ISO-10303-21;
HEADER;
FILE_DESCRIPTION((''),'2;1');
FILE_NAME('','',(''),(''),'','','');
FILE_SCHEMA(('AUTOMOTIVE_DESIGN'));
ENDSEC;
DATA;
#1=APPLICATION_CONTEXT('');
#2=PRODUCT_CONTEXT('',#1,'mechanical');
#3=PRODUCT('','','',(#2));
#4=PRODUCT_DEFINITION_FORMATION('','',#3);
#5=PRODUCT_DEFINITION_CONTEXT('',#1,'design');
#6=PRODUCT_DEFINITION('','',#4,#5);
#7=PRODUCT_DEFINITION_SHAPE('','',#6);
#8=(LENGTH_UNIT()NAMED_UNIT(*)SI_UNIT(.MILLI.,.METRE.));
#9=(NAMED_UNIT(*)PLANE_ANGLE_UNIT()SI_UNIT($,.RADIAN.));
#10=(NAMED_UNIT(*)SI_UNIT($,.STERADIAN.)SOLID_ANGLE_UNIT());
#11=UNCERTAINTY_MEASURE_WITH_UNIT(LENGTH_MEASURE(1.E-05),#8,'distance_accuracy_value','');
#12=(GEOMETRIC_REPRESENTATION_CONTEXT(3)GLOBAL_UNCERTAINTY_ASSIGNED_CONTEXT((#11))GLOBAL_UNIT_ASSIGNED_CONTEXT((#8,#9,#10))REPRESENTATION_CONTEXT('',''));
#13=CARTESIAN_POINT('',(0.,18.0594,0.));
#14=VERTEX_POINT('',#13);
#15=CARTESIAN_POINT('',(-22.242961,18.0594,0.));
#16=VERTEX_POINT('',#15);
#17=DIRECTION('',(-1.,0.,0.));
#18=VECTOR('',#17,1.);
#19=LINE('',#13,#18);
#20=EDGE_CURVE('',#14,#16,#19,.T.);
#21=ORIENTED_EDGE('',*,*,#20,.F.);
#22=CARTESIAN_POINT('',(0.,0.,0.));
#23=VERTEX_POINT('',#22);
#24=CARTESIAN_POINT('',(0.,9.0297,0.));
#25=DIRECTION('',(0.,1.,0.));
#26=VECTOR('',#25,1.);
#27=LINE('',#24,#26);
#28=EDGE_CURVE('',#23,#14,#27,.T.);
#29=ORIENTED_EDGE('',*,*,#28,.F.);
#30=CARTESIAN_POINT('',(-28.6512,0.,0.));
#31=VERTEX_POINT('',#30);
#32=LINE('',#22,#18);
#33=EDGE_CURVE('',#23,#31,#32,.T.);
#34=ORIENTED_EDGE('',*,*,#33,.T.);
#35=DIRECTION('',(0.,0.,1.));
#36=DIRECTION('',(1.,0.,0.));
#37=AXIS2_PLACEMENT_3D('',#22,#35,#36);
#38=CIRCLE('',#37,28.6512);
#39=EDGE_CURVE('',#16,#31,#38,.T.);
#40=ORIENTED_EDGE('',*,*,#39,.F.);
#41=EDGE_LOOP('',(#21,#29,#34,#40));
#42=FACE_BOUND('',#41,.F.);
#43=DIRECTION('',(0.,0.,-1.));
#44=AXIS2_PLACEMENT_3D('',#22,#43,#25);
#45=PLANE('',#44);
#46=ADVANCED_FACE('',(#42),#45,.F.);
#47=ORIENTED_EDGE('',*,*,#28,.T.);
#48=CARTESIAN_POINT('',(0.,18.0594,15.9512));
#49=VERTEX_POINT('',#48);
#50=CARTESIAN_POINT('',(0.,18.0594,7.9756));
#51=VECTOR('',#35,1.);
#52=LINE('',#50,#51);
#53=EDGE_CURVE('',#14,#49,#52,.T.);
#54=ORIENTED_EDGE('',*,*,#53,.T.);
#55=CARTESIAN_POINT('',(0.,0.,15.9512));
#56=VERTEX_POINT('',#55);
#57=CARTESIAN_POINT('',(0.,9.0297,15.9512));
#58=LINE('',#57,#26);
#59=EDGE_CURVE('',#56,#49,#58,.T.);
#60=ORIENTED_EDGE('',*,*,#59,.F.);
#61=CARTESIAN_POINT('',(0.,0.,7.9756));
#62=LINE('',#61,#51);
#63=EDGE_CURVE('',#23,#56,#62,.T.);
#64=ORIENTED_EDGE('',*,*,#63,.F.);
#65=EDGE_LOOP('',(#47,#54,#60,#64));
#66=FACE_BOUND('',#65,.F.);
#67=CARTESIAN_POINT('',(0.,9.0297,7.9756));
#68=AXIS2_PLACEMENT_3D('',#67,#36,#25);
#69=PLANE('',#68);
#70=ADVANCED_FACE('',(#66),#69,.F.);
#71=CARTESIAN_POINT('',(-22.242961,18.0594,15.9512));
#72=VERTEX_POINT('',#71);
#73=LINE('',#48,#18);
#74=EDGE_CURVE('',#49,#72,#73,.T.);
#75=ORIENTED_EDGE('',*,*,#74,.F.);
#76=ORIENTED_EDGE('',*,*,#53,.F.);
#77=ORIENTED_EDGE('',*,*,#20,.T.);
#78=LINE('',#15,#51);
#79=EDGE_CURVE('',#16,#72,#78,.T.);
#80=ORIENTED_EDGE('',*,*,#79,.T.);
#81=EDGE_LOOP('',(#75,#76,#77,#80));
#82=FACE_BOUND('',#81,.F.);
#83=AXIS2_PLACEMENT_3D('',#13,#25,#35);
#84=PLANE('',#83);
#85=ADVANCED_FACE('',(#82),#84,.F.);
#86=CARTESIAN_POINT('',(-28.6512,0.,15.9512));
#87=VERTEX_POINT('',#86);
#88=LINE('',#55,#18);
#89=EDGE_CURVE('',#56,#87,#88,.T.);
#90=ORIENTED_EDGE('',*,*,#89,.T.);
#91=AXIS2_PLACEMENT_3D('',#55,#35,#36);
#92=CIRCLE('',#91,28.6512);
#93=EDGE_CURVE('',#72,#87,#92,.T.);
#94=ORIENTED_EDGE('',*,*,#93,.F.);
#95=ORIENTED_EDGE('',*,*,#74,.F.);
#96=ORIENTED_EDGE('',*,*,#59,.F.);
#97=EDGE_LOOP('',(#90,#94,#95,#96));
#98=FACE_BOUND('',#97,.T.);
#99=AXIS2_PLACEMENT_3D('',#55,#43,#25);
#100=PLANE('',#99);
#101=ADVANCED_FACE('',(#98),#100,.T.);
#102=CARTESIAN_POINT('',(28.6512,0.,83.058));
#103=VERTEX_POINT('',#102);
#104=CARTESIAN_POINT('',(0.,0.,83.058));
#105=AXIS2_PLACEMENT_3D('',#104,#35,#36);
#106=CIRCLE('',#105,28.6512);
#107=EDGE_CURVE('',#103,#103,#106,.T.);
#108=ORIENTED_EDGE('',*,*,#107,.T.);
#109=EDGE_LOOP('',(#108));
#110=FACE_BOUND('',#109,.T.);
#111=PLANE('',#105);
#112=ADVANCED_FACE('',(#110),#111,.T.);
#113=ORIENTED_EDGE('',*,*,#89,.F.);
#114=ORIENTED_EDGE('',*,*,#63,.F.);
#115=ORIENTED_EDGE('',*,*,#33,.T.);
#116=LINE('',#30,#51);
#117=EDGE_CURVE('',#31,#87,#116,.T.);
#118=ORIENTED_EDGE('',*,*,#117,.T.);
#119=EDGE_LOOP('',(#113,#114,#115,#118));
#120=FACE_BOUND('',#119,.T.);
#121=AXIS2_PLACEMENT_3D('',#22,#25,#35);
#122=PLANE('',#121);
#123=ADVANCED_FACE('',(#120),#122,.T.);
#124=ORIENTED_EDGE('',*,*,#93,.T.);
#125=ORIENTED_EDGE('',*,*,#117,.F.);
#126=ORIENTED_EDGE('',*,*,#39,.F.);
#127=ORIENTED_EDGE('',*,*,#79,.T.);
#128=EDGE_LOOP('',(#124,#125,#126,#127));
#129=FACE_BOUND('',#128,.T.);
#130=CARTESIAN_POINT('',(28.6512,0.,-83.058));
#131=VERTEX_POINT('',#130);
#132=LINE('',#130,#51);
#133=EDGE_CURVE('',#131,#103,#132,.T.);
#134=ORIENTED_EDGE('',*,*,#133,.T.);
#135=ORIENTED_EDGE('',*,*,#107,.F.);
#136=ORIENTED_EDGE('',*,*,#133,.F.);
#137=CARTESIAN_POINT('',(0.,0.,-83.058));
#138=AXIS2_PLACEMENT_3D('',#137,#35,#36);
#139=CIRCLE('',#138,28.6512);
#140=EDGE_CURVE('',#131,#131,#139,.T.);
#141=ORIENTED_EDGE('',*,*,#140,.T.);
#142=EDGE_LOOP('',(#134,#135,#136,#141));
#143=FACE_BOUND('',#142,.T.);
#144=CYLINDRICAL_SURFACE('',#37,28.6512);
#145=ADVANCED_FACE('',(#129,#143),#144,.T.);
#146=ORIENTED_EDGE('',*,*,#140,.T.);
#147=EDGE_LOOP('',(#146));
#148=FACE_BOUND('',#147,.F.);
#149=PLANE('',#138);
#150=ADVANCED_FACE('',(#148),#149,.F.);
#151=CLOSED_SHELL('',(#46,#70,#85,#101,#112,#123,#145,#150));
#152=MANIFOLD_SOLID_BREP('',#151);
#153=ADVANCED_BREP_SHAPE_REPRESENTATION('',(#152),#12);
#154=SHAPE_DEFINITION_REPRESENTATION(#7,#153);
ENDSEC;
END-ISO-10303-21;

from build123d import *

# Parameters (mm, degrees)
F0_R     = 28.6512
F1_DEPTH = 83.058
F2_W     = 18.0594
F2_H     = 15.9512
F4_DEPTH = 60.706


# Not quite as in the source:
# - a feature of the source that left no trace in its solid (it failed there, or was rolled back) is left out


with BuildPart() as f1:
    # F0 (on Top) → F1 (new body, symmetric)
    with BuildSketch(Plane.XY):
        Circle(F0_R)
    extrude(amount=F1_DEPTH, both=True)

    # F2 (on Right) → F4 (cut)
    with BuildSketch(Plane.YZ):
        with Locations((9.0297, 7.9756)):
            Rectangle(F2_W, F2_H)
    extrude(amount=-F4_DEPTH, mode=Mode.SUBTRACT)


solid = f1.part
